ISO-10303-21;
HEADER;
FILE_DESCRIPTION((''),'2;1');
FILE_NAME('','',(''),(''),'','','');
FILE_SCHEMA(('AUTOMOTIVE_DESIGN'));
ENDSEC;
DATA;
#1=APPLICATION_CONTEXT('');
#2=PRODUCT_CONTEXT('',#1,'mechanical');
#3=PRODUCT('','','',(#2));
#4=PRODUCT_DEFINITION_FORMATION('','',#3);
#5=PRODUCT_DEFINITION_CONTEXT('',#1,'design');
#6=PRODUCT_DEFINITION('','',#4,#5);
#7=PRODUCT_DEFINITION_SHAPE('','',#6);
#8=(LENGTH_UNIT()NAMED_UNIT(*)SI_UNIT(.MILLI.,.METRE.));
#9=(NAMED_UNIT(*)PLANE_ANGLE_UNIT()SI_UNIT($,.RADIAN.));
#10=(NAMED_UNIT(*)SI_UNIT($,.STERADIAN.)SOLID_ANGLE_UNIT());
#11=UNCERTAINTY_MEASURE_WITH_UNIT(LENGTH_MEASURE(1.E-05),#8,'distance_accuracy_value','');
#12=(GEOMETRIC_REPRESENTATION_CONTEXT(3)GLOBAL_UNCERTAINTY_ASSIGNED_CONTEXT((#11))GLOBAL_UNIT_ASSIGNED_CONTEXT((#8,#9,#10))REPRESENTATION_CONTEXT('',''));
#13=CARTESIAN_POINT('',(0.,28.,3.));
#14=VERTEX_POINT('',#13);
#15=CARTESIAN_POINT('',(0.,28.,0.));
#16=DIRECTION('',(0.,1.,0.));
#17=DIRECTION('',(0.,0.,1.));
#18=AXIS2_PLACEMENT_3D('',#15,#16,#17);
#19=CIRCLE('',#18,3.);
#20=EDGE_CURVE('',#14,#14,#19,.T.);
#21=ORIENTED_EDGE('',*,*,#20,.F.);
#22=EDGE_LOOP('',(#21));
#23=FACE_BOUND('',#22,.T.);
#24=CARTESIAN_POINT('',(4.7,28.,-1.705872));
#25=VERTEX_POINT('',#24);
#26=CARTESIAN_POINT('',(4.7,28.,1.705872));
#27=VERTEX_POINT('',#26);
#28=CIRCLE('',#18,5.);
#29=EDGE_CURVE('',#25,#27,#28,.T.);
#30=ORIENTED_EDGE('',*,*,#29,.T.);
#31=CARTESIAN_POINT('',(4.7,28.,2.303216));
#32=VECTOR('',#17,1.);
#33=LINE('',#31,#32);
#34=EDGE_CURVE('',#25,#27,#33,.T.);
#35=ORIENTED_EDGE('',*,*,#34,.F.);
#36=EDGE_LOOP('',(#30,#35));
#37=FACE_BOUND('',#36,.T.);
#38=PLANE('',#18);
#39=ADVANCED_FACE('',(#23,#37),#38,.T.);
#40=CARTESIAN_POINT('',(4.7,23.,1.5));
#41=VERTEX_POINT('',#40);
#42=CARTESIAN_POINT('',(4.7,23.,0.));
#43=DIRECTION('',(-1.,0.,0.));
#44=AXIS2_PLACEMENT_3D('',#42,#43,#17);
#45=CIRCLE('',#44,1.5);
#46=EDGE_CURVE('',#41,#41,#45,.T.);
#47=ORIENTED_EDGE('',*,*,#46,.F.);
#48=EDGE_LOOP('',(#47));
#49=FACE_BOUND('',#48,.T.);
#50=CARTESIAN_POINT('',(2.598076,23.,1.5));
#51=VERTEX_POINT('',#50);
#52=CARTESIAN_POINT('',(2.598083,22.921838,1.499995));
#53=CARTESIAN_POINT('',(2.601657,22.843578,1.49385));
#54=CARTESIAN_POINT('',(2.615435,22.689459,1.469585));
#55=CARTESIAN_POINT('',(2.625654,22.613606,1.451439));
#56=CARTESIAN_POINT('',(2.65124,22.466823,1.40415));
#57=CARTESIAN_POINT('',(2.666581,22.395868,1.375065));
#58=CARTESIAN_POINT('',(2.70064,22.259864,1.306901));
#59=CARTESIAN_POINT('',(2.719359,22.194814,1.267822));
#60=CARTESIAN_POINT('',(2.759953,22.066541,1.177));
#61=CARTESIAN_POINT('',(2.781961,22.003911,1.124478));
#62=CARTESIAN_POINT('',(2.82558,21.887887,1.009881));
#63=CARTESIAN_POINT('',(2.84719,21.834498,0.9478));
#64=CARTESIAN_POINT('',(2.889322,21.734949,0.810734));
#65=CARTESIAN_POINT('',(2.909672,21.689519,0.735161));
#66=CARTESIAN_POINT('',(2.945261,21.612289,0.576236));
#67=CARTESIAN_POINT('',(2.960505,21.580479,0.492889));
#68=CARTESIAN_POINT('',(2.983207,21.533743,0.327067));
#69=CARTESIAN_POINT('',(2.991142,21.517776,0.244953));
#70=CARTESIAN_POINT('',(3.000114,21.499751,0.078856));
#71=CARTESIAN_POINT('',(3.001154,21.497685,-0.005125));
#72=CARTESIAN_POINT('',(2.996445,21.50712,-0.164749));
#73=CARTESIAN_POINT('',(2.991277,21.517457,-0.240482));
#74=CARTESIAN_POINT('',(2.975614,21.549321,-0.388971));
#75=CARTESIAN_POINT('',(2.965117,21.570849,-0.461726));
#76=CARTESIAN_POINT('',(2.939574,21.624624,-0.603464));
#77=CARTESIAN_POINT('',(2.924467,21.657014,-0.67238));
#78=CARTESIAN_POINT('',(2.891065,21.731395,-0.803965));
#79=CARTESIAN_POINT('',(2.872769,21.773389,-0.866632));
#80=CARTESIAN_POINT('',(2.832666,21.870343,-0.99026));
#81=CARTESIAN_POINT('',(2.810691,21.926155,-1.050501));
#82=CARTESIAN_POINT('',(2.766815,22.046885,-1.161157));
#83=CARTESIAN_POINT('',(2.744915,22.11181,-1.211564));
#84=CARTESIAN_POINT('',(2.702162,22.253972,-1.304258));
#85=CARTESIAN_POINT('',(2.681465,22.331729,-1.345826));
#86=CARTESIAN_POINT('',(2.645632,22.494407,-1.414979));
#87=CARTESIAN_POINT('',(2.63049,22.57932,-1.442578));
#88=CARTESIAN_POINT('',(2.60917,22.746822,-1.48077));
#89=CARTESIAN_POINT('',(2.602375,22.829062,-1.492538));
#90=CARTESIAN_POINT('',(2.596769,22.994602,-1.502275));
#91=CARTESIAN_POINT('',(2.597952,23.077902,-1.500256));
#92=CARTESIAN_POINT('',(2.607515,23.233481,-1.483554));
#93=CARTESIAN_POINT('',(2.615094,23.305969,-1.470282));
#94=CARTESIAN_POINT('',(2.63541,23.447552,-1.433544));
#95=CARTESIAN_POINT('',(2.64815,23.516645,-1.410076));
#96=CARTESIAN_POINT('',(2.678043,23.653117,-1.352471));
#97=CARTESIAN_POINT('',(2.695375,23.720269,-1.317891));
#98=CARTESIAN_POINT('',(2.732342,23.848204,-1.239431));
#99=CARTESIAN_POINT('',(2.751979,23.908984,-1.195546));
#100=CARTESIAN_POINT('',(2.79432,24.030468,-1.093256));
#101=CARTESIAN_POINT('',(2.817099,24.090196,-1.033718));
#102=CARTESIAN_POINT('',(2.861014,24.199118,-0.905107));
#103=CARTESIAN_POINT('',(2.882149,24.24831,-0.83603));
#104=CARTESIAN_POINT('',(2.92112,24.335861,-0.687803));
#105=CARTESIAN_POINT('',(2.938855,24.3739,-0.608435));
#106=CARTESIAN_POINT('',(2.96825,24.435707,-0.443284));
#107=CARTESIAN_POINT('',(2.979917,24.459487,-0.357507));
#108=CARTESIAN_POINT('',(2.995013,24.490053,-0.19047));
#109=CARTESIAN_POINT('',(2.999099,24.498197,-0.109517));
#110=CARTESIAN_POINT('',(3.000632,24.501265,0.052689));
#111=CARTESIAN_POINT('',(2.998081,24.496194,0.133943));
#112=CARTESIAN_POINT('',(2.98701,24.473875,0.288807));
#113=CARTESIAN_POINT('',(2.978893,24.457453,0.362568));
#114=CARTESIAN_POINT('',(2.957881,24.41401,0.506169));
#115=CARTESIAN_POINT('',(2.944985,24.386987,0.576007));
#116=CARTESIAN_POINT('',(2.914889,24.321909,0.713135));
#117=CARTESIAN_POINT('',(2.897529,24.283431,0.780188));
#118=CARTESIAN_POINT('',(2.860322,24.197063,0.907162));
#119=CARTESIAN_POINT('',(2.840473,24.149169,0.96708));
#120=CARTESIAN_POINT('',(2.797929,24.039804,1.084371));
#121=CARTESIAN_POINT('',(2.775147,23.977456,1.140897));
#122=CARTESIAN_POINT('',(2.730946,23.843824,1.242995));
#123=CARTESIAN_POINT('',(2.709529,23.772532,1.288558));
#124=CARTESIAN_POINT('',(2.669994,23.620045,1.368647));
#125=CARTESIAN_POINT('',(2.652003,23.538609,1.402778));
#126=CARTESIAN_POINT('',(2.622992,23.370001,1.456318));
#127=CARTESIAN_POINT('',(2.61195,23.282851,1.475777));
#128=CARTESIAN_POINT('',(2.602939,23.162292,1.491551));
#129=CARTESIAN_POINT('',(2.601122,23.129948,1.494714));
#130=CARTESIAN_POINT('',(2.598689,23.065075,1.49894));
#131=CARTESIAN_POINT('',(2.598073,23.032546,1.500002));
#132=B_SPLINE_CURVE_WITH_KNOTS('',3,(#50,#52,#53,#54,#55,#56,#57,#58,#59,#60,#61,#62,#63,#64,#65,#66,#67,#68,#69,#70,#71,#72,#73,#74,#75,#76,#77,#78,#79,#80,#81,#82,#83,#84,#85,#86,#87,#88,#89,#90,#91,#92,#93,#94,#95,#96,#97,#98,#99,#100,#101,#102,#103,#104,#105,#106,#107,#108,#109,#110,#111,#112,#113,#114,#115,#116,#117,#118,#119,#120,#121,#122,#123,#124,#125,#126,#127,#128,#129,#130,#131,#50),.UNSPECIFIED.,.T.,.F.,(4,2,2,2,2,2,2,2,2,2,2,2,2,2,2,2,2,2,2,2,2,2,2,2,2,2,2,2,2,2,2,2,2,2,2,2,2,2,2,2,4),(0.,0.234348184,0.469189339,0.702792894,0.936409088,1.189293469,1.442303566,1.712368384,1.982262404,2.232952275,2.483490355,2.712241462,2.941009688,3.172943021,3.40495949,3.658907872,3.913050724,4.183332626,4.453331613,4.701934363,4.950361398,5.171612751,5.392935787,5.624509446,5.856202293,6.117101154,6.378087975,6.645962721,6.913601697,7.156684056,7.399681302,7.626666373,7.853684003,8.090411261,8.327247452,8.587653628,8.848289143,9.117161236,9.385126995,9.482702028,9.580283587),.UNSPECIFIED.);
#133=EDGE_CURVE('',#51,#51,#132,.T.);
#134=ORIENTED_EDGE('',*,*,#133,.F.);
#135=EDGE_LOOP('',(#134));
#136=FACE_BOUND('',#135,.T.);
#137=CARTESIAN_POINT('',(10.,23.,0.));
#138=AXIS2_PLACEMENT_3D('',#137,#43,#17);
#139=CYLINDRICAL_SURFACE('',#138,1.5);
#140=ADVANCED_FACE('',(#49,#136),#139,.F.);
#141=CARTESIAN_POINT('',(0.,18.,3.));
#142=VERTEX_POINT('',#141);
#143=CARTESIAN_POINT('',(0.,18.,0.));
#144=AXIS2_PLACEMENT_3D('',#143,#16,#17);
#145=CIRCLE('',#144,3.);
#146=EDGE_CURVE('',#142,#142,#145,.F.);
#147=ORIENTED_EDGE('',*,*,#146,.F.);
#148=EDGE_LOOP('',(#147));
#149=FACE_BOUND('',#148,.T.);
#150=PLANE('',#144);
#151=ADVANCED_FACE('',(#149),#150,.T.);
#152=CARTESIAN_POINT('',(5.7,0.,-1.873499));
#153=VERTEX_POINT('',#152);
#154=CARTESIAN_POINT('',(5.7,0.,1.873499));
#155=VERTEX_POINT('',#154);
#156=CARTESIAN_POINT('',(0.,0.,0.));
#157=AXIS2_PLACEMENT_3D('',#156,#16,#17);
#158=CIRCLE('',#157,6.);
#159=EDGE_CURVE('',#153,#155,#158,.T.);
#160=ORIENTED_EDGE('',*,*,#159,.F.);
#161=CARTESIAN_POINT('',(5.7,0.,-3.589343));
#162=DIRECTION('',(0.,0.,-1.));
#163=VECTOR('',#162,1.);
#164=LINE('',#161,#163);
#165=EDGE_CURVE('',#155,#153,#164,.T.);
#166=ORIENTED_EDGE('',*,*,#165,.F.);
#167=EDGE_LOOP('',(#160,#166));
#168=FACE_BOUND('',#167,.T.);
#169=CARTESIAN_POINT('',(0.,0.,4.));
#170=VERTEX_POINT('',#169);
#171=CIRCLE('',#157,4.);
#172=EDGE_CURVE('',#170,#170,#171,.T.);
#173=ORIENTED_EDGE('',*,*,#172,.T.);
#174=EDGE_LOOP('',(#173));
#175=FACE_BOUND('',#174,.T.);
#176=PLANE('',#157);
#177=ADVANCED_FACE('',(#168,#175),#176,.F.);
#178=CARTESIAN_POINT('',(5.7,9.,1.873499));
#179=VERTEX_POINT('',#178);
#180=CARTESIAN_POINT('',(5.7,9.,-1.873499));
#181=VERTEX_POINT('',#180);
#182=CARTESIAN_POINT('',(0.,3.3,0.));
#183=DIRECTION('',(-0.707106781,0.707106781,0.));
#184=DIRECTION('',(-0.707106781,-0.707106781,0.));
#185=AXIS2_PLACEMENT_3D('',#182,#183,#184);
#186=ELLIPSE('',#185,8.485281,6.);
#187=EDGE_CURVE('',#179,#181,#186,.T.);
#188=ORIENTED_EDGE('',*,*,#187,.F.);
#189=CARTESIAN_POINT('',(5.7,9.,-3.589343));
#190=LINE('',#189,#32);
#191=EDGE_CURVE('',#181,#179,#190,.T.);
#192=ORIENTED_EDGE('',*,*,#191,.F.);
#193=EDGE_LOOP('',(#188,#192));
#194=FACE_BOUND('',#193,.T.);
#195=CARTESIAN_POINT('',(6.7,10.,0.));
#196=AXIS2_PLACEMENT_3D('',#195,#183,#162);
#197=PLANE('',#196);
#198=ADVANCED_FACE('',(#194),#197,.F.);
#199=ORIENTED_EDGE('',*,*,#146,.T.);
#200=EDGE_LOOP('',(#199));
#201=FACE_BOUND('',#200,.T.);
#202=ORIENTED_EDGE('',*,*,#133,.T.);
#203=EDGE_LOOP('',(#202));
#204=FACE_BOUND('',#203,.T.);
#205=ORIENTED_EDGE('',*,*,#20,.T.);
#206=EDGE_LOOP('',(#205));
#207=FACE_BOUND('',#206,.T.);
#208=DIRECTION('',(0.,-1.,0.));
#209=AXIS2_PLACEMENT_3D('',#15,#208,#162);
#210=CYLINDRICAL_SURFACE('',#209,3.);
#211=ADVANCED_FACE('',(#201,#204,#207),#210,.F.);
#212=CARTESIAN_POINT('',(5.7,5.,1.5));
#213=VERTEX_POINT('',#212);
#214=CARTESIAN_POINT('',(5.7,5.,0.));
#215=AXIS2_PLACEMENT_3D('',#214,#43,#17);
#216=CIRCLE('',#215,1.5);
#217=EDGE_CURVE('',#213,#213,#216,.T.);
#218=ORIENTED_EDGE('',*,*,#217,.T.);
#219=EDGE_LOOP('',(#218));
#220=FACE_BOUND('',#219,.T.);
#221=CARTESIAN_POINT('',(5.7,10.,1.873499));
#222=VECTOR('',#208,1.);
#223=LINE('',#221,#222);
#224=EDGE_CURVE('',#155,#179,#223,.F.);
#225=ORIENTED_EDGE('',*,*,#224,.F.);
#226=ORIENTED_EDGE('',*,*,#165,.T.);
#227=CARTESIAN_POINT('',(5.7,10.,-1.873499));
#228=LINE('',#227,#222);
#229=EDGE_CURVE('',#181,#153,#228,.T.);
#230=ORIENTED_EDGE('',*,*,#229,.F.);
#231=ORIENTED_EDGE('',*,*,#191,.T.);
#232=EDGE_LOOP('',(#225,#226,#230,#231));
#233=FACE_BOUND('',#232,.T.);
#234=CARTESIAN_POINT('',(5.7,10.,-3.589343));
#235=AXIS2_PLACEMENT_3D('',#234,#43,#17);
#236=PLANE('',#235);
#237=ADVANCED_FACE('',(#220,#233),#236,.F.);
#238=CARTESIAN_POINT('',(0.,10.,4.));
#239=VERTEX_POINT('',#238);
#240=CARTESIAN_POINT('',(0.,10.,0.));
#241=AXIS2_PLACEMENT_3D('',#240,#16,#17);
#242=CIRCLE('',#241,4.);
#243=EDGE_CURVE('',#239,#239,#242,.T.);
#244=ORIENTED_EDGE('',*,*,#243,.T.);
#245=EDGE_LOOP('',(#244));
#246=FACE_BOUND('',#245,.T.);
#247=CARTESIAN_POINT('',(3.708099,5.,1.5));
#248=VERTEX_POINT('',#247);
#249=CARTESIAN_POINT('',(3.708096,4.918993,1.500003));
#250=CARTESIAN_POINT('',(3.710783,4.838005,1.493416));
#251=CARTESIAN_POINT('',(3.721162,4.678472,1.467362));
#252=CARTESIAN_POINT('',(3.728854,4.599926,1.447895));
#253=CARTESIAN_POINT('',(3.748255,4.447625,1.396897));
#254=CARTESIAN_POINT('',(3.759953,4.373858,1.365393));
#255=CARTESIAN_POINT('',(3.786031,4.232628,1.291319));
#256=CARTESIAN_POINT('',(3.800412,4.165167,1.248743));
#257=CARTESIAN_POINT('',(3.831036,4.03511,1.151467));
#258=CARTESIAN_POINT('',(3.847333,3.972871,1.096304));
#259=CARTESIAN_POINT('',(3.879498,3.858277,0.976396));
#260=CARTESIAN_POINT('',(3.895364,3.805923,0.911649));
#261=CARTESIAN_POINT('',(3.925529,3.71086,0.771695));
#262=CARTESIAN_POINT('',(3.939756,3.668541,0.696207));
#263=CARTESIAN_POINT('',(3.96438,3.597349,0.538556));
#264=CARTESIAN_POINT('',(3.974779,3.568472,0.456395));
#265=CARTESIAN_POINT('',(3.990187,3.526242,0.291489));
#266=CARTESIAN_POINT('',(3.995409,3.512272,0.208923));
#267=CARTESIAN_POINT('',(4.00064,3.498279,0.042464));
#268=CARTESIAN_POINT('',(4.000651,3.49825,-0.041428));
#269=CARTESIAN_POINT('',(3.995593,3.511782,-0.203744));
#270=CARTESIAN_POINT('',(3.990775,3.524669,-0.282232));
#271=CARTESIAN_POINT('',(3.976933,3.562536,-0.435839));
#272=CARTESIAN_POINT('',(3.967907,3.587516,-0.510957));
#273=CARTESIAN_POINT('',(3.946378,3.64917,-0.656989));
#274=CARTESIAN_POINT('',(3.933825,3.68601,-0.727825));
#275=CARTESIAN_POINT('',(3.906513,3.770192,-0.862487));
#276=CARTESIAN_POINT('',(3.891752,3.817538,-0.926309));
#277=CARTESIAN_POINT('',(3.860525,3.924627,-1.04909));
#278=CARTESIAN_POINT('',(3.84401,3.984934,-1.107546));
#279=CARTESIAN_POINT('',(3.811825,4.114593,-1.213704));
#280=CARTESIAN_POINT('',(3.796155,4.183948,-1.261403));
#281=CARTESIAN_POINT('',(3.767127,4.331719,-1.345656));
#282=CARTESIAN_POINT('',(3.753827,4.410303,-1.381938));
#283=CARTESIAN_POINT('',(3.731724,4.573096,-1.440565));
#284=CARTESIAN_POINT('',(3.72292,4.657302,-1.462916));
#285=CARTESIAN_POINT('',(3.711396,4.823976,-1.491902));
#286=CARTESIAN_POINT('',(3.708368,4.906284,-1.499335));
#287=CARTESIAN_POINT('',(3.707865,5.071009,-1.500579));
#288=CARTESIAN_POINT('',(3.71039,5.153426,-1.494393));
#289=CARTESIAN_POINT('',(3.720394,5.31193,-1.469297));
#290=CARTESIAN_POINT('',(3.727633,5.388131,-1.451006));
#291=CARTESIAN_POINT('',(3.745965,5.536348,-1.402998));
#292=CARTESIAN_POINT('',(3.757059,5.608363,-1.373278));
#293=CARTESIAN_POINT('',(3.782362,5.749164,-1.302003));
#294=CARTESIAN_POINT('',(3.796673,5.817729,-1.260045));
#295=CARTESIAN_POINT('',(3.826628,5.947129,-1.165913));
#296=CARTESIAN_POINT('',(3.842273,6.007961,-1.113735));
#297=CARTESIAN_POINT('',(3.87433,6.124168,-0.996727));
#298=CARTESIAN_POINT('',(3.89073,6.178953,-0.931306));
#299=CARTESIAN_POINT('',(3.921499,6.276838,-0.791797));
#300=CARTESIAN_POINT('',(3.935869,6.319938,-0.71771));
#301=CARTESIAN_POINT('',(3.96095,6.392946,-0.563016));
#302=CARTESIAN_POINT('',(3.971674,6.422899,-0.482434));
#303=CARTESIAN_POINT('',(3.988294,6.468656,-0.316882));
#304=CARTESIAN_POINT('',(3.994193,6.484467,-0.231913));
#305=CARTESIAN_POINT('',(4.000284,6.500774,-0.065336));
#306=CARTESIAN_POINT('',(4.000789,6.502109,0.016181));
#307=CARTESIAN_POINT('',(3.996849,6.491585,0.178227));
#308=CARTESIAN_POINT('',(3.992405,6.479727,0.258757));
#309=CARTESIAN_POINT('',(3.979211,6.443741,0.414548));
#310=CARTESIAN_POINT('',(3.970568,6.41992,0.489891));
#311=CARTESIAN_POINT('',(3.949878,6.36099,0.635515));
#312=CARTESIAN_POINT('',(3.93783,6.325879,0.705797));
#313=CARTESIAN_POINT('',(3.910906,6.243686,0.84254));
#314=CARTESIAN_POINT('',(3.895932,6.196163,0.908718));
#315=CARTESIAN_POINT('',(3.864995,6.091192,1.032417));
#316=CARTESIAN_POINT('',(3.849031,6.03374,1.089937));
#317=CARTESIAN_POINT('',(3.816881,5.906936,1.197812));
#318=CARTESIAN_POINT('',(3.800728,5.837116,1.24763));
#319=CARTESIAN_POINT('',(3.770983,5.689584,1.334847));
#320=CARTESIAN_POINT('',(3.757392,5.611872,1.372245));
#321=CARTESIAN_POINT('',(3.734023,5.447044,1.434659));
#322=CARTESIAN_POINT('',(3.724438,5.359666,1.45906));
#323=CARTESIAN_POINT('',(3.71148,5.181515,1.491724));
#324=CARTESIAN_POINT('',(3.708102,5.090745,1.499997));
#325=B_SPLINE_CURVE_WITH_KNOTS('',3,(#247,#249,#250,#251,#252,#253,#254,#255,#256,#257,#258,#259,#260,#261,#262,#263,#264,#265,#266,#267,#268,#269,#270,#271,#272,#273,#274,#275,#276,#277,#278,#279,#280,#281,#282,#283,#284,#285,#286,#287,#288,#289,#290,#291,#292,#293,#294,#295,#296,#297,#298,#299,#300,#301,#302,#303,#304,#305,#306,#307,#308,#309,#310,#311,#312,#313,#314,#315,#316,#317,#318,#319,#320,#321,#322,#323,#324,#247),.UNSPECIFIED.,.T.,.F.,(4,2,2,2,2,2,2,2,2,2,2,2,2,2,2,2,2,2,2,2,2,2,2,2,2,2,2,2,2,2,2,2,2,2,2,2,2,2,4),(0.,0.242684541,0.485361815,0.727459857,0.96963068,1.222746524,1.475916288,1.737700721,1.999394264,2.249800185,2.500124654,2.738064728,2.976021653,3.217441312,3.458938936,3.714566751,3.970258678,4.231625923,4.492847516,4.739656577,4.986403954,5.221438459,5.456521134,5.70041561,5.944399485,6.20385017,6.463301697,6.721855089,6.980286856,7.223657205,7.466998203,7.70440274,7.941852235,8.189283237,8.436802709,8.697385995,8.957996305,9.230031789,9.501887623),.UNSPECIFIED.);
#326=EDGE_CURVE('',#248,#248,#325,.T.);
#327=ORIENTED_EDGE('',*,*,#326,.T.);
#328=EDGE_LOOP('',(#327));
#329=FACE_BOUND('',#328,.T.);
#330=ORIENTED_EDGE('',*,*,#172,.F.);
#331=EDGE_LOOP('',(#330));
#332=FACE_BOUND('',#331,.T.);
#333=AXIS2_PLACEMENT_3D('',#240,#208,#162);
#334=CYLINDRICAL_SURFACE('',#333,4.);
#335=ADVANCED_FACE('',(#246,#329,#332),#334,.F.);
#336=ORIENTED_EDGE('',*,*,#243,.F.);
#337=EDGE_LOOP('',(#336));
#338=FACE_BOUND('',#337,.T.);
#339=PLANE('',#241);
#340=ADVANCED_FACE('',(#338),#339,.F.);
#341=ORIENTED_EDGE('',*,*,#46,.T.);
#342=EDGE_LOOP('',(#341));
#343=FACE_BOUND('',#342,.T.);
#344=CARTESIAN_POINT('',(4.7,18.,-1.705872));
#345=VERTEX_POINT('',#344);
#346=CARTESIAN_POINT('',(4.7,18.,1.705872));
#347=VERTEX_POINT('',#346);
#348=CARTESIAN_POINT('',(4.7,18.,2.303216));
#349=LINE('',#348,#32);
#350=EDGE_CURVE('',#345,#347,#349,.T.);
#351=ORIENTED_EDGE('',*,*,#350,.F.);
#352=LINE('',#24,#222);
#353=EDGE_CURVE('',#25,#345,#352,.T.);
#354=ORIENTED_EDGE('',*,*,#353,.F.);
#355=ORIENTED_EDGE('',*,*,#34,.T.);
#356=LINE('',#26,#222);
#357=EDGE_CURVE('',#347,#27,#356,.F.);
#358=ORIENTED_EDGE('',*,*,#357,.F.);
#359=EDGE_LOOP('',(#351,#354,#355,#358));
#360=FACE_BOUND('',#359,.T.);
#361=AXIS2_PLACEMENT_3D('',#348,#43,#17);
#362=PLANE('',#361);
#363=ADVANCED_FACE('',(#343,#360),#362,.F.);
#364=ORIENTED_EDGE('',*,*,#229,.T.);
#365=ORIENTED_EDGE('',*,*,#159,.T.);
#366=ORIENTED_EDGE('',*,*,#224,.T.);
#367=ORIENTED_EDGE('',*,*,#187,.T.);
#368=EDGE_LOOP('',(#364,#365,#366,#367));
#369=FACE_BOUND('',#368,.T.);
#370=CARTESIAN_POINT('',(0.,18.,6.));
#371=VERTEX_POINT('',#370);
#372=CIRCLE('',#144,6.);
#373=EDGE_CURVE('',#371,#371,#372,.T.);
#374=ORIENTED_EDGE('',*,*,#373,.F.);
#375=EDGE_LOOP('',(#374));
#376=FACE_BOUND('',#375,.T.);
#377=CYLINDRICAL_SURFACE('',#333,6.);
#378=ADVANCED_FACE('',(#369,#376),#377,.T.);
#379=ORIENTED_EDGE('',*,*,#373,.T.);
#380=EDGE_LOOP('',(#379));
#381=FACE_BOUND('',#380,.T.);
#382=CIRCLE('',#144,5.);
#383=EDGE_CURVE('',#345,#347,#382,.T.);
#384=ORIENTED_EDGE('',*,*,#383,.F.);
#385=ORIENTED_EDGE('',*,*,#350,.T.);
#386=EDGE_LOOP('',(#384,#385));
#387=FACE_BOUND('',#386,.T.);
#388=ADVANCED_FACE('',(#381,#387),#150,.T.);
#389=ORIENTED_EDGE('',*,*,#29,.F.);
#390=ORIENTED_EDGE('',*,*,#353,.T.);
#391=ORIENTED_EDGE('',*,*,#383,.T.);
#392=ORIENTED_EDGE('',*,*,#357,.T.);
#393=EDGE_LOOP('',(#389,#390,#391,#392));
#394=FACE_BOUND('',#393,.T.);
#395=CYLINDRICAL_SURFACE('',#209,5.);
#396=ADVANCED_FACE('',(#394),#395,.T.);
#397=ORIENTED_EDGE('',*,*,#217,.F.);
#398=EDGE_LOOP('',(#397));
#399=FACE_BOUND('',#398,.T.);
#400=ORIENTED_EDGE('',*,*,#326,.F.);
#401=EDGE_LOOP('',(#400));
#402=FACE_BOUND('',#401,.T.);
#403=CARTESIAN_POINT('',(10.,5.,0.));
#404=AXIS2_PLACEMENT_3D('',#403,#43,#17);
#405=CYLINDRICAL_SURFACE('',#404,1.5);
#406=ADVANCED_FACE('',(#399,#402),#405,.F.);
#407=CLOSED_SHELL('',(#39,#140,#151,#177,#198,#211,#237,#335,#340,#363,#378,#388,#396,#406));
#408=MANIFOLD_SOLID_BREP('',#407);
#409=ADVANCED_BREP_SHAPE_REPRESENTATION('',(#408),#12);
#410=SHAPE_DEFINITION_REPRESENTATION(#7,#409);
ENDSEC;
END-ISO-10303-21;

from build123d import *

# Parameters (mm, degrees)
SKETCH1_R           = 6
SKETCH1_R_2         = 4
BOSS_EXTRUDE1_DEPTH = 10
SKETCH2_R           = 6
BOSS_EXTRUDE2_DEPTH = 8
SKETCH3_R           = 5
SKETCH3_R_2         = 3
BOSS_EXTRUDE3_DEPTH = 10
SKETCH4_R           = 1.5
CUT_EXTRUDE1_DEPTH  = 10
SKETCH5_W           = 1.364712806
SKETCH5_H           = 6.528107361
CUT_EXTRUDE2_DEPTH  = 10
CHAMFER1_SIZE       = 1
SKETCH6_W           = 0.953233667
SKETCH6_H           = 4.701860643
CUT_EXTRUDE3_DEPTH  = 10


with BuildPart() as part:
    # Sketch1 → Boss-Extrude1 (new body)
    with BuildSketch(Plane(origin=(0, 0, 0), x_dir=(1, 0, 0), z_dir=(0, 1, 0))):
        with Locations(Location((0, 0, 0), (0, 0, 270))):
            Circle(SKETCH1_R)
        with Locations(Location((0, 0, 0), (0, 0, 270))):
            Circle(SKETCH1_R_2, mode=Mode.SUBTRACT)
    extrude(amount=BOSS_EXTRUDE1_DEPTH)

    # Sketch2 → Boss-Extrude2 (add)
    with BuildSketch(Plane(origin=(0, 10, 0), x_dir=(1, 0, 0), z_dir=(0, 1, 0))):
        with Locations(Location((0, 0, 0), (0, 0, 270))):
            Circle(SKETCH2_R)
    extrude(amount=BOSS_EXTRUDE2_DEPTH)

    # Sketch3 → Boss-Extrude3 (add)
    with BuildSketch(Plane(origin=(0, 18, 0), x_dir=(1, 0, 0), z_dir=(0, 1, 0))):
        with Locations(Location((0, 0, 0), (0, 0, 270))):
            Circle(SKETCH3_R)
        with Locations(Location((0, 0, 0), (0, 0, 270))):
            Circle(SKETCH3_R_2, mode=Mode.SUBTRACT)
    extrude(amount=BOSS_EXTRUDE3_DEPTH)

    # Sketch4 → Cut-Extrude1 (cut)
    with BuildSketch(Plane(origin=(0, 0, 0), x_dir=(0, 0, -1), z_dir=(1, 0, 0))):
        with Locations(Location((0, 5, 0), (0, 0, 180))):
            Circle(SKETCH4_R)
        with Locations(Location((0, 23, 0), (0, 0, 180))):
            Circle(SKETCH4_R)
    extrude(amount=CUT_EXTRUDE1_DEPTH, mode=Mode.SUBTRACT)

    # Sketch5 → Cut-Extrude2 (cut)
    with BuildSketch(Plane.XZ):
        with Locations((6.382356403, -0.325289304)):
            Rectangle(SKETCH5_W, SKETCH5_H)
    extrude(amount=-CUT_EXTRUDE2_DEPTH, mode=Mode.SUBTRACT)

    # Chamfer1
    # the kernel refuses this chamfer: 1 mm, written as the material it adds along each edge
    with BuildSketch(Plane(origin=(5.7, 10, -4.445182387), x_dir=(-0.02749587661058651, -0.9996219169112968, 0), z_dir=(0, 0, 1))) as chamfer1_piece_1_section:
        Polygon((CHAMFER1_SIZE * 0.999621916911, CHAMFER1_SIZE * 0.0274958766106), (-CHAMFER1_SIZE * 0.0274958766106, CHAMFER1_SIZE * 0.999621916911), (0, 0), align=None)
    chamfer1_piece_1 = extrude(amount=8.890364775, mode=Mode.PRIVATE)
    chamfer1_piece_1 = chamfer1_piece_1 & Plane(origin=(0, 9.556619027, 0), x_dir=(0, 0, 1), z_dir=(0, -1, 0)) * Cylinder(6, 22, mode=Mode.PRIVATE)
    add(chamfer1_piece_1)

    # Sketch6 → Cut-Extrude3 (cut)
    with BuildSketch(Plane(origin=(0, 28, 0), x_dir=(1, 0, 0), z_dir=(0, 1, 0))):
        with Locations((5.176616834, 0.047714229)):
            Rectangle(SKETCH6_W, SKETCH6_H)
    extrude(amount=-CUT_EXTRUDE3_DEPTH, mode=Mode.SUBTRACT)


solid = part.part
